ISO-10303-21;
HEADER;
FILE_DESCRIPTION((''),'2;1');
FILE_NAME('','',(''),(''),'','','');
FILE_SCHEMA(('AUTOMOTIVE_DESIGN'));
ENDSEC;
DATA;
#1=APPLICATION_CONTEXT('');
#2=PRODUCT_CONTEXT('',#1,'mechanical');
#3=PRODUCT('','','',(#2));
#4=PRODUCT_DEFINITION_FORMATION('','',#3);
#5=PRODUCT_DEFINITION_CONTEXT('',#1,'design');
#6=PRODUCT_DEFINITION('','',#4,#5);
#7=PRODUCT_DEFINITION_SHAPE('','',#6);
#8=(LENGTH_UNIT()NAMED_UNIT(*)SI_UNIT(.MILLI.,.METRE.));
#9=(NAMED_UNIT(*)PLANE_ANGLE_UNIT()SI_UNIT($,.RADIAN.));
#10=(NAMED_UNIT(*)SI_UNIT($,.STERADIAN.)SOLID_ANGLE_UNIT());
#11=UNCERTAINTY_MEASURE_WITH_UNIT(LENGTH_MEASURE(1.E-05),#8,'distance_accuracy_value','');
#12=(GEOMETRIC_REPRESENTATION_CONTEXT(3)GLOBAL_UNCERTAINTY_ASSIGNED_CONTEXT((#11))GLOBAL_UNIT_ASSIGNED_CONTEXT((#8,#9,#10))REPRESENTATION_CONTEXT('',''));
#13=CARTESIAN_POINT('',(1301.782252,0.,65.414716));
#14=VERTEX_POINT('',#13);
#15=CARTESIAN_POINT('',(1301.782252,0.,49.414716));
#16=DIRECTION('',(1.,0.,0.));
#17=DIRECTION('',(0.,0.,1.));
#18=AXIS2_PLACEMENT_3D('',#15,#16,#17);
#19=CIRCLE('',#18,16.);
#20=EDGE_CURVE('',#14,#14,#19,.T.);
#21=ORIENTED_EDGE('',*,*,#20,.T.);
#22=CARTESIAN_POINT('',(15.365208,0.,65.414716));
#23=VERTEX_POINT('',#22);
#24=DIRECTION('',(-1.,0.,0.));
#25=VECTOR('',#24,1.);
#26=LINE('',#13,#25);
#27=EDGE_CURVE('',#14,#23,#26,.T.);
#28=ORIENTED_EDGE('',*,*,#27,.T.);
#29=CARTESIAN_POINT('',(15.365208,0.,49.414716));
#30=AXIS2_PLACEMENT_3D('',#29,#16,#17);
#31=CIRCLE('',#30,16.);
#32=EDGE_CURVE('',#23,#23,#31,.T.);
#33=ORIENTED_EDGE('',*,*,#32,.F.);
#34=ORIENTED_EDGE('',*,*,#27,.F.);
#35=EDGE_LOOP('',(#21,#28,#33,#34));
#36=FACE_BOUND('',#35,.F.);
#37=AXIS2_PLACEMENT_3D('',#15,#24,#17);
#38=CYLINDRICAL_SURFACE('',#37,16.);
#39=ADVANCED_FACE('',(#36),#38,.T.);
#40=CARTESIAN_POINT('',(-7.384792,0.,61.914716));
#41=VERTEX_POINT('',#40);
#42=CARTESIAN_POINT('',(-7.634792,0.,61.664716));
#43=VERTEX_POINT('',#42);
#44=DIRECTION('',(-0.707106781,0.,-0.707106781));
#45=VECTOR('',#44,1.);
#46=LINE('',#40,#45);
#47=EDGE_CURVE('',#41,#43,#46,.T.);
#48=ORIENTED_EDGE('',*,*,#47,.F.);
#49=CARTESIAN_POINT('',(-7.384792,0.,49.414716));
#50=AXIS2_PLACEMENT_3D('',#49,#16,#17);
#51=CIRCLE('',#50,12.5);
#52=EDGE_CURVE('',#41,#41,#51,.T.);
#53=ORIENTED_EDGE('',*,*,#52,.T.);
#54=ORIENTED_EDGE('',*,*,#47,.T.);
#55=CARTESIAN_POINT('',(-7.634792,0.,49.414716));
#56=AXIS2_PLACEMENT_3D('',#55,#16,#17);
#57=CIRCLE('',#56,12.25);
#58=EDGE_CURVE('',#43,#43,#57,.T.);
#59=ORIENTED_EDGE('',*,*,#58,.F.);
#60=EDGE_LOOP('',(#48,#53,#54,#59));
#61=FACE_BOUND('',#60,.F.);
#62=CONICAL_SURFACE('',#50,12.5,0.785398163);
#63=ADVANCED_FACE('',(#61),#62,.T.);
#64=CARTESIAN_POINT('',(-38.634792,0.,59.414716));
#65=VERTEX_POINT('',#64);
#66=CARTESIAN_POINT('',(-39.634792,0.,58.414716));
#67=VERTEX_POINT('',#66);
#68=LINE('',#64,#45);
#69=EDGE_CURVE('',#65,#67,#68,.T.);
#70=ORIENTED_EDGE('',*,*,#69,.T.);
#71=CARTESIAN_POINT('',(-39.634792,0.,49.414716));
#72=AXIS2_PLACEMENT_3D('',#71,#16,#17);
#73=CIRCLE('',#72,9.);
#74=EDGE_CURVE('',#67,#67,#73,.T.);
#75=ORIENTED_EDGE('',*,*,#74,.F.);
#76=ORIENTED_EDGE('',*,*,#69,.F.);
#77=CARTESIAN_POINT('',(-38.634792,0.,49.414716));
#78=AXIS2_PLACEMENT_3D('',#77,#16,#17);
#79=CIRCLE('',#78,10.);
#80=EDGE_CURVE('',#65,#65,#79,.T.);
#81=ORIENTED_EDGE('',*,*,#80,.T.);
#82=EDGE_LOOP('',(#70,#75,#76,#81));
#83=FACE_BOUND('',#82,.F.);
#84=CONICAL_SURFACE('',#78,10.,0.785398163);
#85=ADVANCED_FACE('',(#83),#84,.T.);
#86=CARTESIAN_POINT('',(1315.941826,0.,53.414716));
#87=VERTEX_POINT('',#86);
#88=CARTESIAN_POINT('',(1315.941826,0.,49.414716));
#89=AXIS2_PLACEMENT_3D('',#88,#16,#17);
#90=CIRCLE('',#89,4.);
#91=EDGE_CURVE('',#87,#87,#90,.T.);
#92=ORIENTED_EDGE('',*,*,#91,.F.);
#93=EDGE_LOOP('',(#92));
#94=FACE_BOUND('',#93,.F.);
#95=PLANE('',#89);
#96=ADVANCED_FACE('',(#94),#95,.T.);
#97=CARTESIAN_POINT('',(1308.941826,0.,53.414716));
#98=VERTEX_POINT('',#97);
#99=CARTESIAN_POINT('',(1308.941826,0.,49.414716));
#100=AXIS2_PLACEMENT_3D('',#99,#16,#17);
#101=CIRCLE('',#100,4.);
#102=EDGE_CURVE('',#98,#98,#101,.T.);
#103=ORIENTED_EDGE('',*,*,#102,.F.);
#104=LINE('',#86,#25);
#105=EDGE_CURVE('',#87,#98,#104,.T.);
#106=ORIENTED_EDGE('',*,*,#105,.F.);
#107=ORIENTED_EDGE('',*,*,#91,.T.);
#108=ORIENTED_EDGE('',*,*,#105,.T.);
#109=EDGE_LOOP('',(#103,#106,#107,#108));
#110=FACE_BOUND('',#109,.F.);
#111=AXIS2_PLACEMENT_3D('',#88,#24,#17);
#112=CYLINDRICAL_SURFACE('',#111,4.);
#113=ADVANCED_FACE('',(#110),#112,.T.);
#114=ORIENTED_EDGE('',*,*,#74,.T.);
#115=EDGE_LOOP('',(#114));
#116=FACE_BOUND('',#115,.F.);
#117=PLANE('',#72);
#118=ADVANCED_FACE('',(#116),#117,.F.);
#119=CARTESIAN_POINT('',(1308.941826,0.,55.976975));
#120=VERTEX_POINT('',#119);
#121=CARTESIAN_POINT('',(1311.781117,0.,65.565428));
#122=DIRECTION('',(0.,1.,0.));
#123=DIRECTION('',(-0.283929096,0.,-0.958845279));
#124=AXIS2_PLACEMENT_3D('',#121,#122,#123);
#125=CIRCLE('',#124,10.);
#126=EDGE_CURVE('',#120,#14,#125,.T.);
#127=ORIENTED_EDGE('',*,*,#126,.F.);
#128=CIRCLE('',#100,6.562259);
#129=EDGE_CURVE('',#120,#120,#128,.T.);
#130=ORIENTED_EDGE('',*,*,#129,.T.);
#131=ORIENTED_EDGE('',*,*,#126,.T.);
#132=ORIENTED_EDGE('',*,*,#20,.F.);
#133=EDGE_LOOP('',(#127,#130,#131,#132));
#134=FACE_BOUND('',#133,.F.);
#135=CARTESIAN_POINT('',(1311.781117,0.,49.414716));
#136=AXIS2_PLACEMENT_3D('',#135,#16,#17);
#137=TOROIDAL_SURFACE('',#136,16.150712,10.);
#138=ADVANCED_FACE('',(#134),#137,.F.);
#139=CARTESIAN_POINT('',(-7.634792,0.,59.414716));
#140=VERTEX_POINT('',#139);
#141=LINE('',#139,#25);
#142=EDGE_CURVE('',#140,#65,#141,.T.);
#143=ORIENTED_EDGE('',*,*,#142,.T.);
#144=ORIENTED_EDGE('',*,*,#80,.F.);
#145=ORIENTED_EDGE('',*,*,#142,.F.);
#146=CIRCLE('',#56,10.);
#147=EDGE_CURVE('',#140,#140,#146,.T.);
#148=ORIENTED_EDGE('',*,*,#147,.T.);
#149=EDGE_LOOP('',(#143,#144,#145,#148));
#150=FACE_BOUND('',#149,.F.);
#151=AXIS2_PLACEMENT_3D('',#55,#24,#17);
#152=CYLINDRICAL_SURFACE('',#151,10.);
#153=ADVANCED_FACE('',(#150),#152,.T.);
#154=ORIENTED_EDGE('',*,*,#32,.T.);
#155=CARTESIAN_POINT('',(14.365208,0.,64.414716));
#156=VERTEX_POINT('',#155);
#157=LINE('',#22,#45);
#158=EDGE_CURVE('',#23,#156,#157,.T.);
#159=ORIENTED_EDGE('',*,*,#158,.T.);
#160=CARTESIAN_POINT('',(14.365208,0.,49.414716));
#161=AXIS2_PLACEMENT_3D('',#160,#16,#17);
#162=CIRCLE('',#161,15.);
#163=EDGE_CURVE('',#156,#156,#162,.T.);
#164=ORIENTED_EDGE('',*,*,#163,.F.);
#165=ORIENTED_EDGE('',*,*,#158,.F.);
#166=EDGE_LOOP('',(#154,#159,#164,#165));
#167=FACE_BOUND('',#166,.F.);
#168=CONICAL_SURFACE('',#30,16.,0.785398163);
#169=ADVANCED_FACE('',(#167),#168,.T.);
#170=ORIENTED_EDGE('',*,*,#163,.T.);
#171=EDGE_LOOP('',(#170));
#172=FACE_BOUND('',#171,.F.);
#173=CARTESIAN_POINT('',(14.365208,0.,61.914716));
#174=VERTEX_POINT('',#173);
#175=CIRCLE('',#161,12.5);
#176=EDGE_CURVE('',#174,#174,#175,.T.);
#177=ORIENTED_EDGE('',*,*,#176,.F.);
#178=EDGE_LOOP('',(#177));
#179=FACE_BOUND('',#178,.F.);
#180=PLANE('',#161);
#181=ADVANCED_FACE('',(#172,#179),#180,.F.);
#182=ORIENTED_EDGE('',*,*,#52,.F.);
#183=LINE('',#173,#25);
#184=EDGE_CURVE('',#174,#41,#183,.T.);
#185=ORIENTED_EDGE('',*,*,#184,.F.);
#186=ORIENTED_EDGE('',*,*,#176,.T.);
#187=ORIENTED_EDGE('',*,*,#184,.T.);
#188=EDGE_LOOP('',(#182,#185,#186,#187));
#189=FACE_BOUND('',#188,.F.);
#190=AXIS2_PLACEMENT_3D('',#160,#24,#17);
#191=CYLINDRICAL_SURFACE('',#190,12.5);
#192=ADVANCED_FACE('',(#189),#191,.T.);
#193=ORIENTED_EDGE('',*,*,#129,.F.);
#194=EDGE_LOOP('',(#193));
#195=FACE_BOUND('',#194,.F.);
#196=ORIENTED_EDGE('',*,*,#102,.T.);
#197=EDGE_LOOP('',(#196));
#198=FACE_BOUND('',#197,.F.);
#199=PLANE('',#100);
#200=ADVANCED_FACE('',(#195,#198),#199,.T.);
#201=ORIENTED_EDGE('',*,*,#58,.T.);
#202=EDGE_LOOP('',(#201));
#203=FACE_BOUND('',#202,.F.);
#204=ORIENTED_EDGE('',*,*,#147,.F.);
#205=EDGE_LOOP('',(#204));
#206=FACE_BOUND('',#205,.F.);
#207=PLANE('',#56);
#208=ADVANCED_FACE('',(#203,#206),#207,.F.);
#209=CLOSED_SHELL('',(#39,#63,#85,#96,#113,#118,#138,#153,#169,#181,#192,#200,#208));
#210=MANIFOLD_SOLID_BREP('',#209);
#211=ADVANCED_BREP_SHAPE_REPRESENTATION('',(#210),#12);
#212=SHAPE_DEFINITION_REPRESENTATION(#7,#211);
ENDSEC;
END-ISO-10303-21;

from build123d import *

# Parameters (mm, degrees)
F2_SIZE = 1
F3_SIZE = 0.25
F4_SIZE = 1


with BuildPart() as f1:
    # F0 (on Front) → F1 (revolve)
    with BuildSketch(Plane.XZ):
        with BuildLine():
            Line((-39.6347922059, 59.4147157063), (-39.6347922059, 49.4147157063))
            Line((-39.6347922059, 49.4147157063), (1315.9418255951, 49.4147157063))
            Line((1315.9418255951, 49.4147157063), (1315.9418255951, 53.4147157063))
            Line((1315.9418255951, 53.4147157063), (1308.9418255951, 53.4147157063))
            Line((1308.9418255951, 53.4147157063), (1308.9418255951, 55.9769750426))
            ThreePointArc((1308.9418255951, 55.9769750426), (1303.814166428, 59.5216123442), (1301.782252331, 65.4147157063))
            Line((1301.782252331, 65.4147157063), (14.3652077941, 65.4147157063))
            Line((14.3652077941, 65.4147157063), (14.3652077941, 61.9147157063))
            Line((14.3652077941, 61.9147157063), (-7.6347922059, 61.9147157063))
            Line((-7.6347922059, 61.9147157063), (-7.6347922059, 59.4147157063))
            Line((-7.6347922059, 59.4147157063), (-39.6347922059, 59.4147157063))
        make_face()
    revolve(axis=Axis((638.1535166946, 0, 49.4147157063), (1, 0, 0)))

    # F2
    f2_edges = [f1.edges().sort_by_distance(p)[0] for p in [
        (14.365208, 0, 33.414716),
    ]]
    chamfer(f2_edges, length=F2_SIZE)

    # F3
    f3_edges = [f1.edges().sort_by_distance(p)[0] for p in [
        (-7.634792, 0, 36.914716),
    ]]
    chamfer(f3_edges, length=F3_SIZE)

    # F4
    f4_edges = [f1.edges().sort_by_distance(p)[0] for p in [
        (-39.634792, 0, 39.414716),
    ]]
    chamfer(f4_edges, length=F4_SIZE)


solid = f1.part
